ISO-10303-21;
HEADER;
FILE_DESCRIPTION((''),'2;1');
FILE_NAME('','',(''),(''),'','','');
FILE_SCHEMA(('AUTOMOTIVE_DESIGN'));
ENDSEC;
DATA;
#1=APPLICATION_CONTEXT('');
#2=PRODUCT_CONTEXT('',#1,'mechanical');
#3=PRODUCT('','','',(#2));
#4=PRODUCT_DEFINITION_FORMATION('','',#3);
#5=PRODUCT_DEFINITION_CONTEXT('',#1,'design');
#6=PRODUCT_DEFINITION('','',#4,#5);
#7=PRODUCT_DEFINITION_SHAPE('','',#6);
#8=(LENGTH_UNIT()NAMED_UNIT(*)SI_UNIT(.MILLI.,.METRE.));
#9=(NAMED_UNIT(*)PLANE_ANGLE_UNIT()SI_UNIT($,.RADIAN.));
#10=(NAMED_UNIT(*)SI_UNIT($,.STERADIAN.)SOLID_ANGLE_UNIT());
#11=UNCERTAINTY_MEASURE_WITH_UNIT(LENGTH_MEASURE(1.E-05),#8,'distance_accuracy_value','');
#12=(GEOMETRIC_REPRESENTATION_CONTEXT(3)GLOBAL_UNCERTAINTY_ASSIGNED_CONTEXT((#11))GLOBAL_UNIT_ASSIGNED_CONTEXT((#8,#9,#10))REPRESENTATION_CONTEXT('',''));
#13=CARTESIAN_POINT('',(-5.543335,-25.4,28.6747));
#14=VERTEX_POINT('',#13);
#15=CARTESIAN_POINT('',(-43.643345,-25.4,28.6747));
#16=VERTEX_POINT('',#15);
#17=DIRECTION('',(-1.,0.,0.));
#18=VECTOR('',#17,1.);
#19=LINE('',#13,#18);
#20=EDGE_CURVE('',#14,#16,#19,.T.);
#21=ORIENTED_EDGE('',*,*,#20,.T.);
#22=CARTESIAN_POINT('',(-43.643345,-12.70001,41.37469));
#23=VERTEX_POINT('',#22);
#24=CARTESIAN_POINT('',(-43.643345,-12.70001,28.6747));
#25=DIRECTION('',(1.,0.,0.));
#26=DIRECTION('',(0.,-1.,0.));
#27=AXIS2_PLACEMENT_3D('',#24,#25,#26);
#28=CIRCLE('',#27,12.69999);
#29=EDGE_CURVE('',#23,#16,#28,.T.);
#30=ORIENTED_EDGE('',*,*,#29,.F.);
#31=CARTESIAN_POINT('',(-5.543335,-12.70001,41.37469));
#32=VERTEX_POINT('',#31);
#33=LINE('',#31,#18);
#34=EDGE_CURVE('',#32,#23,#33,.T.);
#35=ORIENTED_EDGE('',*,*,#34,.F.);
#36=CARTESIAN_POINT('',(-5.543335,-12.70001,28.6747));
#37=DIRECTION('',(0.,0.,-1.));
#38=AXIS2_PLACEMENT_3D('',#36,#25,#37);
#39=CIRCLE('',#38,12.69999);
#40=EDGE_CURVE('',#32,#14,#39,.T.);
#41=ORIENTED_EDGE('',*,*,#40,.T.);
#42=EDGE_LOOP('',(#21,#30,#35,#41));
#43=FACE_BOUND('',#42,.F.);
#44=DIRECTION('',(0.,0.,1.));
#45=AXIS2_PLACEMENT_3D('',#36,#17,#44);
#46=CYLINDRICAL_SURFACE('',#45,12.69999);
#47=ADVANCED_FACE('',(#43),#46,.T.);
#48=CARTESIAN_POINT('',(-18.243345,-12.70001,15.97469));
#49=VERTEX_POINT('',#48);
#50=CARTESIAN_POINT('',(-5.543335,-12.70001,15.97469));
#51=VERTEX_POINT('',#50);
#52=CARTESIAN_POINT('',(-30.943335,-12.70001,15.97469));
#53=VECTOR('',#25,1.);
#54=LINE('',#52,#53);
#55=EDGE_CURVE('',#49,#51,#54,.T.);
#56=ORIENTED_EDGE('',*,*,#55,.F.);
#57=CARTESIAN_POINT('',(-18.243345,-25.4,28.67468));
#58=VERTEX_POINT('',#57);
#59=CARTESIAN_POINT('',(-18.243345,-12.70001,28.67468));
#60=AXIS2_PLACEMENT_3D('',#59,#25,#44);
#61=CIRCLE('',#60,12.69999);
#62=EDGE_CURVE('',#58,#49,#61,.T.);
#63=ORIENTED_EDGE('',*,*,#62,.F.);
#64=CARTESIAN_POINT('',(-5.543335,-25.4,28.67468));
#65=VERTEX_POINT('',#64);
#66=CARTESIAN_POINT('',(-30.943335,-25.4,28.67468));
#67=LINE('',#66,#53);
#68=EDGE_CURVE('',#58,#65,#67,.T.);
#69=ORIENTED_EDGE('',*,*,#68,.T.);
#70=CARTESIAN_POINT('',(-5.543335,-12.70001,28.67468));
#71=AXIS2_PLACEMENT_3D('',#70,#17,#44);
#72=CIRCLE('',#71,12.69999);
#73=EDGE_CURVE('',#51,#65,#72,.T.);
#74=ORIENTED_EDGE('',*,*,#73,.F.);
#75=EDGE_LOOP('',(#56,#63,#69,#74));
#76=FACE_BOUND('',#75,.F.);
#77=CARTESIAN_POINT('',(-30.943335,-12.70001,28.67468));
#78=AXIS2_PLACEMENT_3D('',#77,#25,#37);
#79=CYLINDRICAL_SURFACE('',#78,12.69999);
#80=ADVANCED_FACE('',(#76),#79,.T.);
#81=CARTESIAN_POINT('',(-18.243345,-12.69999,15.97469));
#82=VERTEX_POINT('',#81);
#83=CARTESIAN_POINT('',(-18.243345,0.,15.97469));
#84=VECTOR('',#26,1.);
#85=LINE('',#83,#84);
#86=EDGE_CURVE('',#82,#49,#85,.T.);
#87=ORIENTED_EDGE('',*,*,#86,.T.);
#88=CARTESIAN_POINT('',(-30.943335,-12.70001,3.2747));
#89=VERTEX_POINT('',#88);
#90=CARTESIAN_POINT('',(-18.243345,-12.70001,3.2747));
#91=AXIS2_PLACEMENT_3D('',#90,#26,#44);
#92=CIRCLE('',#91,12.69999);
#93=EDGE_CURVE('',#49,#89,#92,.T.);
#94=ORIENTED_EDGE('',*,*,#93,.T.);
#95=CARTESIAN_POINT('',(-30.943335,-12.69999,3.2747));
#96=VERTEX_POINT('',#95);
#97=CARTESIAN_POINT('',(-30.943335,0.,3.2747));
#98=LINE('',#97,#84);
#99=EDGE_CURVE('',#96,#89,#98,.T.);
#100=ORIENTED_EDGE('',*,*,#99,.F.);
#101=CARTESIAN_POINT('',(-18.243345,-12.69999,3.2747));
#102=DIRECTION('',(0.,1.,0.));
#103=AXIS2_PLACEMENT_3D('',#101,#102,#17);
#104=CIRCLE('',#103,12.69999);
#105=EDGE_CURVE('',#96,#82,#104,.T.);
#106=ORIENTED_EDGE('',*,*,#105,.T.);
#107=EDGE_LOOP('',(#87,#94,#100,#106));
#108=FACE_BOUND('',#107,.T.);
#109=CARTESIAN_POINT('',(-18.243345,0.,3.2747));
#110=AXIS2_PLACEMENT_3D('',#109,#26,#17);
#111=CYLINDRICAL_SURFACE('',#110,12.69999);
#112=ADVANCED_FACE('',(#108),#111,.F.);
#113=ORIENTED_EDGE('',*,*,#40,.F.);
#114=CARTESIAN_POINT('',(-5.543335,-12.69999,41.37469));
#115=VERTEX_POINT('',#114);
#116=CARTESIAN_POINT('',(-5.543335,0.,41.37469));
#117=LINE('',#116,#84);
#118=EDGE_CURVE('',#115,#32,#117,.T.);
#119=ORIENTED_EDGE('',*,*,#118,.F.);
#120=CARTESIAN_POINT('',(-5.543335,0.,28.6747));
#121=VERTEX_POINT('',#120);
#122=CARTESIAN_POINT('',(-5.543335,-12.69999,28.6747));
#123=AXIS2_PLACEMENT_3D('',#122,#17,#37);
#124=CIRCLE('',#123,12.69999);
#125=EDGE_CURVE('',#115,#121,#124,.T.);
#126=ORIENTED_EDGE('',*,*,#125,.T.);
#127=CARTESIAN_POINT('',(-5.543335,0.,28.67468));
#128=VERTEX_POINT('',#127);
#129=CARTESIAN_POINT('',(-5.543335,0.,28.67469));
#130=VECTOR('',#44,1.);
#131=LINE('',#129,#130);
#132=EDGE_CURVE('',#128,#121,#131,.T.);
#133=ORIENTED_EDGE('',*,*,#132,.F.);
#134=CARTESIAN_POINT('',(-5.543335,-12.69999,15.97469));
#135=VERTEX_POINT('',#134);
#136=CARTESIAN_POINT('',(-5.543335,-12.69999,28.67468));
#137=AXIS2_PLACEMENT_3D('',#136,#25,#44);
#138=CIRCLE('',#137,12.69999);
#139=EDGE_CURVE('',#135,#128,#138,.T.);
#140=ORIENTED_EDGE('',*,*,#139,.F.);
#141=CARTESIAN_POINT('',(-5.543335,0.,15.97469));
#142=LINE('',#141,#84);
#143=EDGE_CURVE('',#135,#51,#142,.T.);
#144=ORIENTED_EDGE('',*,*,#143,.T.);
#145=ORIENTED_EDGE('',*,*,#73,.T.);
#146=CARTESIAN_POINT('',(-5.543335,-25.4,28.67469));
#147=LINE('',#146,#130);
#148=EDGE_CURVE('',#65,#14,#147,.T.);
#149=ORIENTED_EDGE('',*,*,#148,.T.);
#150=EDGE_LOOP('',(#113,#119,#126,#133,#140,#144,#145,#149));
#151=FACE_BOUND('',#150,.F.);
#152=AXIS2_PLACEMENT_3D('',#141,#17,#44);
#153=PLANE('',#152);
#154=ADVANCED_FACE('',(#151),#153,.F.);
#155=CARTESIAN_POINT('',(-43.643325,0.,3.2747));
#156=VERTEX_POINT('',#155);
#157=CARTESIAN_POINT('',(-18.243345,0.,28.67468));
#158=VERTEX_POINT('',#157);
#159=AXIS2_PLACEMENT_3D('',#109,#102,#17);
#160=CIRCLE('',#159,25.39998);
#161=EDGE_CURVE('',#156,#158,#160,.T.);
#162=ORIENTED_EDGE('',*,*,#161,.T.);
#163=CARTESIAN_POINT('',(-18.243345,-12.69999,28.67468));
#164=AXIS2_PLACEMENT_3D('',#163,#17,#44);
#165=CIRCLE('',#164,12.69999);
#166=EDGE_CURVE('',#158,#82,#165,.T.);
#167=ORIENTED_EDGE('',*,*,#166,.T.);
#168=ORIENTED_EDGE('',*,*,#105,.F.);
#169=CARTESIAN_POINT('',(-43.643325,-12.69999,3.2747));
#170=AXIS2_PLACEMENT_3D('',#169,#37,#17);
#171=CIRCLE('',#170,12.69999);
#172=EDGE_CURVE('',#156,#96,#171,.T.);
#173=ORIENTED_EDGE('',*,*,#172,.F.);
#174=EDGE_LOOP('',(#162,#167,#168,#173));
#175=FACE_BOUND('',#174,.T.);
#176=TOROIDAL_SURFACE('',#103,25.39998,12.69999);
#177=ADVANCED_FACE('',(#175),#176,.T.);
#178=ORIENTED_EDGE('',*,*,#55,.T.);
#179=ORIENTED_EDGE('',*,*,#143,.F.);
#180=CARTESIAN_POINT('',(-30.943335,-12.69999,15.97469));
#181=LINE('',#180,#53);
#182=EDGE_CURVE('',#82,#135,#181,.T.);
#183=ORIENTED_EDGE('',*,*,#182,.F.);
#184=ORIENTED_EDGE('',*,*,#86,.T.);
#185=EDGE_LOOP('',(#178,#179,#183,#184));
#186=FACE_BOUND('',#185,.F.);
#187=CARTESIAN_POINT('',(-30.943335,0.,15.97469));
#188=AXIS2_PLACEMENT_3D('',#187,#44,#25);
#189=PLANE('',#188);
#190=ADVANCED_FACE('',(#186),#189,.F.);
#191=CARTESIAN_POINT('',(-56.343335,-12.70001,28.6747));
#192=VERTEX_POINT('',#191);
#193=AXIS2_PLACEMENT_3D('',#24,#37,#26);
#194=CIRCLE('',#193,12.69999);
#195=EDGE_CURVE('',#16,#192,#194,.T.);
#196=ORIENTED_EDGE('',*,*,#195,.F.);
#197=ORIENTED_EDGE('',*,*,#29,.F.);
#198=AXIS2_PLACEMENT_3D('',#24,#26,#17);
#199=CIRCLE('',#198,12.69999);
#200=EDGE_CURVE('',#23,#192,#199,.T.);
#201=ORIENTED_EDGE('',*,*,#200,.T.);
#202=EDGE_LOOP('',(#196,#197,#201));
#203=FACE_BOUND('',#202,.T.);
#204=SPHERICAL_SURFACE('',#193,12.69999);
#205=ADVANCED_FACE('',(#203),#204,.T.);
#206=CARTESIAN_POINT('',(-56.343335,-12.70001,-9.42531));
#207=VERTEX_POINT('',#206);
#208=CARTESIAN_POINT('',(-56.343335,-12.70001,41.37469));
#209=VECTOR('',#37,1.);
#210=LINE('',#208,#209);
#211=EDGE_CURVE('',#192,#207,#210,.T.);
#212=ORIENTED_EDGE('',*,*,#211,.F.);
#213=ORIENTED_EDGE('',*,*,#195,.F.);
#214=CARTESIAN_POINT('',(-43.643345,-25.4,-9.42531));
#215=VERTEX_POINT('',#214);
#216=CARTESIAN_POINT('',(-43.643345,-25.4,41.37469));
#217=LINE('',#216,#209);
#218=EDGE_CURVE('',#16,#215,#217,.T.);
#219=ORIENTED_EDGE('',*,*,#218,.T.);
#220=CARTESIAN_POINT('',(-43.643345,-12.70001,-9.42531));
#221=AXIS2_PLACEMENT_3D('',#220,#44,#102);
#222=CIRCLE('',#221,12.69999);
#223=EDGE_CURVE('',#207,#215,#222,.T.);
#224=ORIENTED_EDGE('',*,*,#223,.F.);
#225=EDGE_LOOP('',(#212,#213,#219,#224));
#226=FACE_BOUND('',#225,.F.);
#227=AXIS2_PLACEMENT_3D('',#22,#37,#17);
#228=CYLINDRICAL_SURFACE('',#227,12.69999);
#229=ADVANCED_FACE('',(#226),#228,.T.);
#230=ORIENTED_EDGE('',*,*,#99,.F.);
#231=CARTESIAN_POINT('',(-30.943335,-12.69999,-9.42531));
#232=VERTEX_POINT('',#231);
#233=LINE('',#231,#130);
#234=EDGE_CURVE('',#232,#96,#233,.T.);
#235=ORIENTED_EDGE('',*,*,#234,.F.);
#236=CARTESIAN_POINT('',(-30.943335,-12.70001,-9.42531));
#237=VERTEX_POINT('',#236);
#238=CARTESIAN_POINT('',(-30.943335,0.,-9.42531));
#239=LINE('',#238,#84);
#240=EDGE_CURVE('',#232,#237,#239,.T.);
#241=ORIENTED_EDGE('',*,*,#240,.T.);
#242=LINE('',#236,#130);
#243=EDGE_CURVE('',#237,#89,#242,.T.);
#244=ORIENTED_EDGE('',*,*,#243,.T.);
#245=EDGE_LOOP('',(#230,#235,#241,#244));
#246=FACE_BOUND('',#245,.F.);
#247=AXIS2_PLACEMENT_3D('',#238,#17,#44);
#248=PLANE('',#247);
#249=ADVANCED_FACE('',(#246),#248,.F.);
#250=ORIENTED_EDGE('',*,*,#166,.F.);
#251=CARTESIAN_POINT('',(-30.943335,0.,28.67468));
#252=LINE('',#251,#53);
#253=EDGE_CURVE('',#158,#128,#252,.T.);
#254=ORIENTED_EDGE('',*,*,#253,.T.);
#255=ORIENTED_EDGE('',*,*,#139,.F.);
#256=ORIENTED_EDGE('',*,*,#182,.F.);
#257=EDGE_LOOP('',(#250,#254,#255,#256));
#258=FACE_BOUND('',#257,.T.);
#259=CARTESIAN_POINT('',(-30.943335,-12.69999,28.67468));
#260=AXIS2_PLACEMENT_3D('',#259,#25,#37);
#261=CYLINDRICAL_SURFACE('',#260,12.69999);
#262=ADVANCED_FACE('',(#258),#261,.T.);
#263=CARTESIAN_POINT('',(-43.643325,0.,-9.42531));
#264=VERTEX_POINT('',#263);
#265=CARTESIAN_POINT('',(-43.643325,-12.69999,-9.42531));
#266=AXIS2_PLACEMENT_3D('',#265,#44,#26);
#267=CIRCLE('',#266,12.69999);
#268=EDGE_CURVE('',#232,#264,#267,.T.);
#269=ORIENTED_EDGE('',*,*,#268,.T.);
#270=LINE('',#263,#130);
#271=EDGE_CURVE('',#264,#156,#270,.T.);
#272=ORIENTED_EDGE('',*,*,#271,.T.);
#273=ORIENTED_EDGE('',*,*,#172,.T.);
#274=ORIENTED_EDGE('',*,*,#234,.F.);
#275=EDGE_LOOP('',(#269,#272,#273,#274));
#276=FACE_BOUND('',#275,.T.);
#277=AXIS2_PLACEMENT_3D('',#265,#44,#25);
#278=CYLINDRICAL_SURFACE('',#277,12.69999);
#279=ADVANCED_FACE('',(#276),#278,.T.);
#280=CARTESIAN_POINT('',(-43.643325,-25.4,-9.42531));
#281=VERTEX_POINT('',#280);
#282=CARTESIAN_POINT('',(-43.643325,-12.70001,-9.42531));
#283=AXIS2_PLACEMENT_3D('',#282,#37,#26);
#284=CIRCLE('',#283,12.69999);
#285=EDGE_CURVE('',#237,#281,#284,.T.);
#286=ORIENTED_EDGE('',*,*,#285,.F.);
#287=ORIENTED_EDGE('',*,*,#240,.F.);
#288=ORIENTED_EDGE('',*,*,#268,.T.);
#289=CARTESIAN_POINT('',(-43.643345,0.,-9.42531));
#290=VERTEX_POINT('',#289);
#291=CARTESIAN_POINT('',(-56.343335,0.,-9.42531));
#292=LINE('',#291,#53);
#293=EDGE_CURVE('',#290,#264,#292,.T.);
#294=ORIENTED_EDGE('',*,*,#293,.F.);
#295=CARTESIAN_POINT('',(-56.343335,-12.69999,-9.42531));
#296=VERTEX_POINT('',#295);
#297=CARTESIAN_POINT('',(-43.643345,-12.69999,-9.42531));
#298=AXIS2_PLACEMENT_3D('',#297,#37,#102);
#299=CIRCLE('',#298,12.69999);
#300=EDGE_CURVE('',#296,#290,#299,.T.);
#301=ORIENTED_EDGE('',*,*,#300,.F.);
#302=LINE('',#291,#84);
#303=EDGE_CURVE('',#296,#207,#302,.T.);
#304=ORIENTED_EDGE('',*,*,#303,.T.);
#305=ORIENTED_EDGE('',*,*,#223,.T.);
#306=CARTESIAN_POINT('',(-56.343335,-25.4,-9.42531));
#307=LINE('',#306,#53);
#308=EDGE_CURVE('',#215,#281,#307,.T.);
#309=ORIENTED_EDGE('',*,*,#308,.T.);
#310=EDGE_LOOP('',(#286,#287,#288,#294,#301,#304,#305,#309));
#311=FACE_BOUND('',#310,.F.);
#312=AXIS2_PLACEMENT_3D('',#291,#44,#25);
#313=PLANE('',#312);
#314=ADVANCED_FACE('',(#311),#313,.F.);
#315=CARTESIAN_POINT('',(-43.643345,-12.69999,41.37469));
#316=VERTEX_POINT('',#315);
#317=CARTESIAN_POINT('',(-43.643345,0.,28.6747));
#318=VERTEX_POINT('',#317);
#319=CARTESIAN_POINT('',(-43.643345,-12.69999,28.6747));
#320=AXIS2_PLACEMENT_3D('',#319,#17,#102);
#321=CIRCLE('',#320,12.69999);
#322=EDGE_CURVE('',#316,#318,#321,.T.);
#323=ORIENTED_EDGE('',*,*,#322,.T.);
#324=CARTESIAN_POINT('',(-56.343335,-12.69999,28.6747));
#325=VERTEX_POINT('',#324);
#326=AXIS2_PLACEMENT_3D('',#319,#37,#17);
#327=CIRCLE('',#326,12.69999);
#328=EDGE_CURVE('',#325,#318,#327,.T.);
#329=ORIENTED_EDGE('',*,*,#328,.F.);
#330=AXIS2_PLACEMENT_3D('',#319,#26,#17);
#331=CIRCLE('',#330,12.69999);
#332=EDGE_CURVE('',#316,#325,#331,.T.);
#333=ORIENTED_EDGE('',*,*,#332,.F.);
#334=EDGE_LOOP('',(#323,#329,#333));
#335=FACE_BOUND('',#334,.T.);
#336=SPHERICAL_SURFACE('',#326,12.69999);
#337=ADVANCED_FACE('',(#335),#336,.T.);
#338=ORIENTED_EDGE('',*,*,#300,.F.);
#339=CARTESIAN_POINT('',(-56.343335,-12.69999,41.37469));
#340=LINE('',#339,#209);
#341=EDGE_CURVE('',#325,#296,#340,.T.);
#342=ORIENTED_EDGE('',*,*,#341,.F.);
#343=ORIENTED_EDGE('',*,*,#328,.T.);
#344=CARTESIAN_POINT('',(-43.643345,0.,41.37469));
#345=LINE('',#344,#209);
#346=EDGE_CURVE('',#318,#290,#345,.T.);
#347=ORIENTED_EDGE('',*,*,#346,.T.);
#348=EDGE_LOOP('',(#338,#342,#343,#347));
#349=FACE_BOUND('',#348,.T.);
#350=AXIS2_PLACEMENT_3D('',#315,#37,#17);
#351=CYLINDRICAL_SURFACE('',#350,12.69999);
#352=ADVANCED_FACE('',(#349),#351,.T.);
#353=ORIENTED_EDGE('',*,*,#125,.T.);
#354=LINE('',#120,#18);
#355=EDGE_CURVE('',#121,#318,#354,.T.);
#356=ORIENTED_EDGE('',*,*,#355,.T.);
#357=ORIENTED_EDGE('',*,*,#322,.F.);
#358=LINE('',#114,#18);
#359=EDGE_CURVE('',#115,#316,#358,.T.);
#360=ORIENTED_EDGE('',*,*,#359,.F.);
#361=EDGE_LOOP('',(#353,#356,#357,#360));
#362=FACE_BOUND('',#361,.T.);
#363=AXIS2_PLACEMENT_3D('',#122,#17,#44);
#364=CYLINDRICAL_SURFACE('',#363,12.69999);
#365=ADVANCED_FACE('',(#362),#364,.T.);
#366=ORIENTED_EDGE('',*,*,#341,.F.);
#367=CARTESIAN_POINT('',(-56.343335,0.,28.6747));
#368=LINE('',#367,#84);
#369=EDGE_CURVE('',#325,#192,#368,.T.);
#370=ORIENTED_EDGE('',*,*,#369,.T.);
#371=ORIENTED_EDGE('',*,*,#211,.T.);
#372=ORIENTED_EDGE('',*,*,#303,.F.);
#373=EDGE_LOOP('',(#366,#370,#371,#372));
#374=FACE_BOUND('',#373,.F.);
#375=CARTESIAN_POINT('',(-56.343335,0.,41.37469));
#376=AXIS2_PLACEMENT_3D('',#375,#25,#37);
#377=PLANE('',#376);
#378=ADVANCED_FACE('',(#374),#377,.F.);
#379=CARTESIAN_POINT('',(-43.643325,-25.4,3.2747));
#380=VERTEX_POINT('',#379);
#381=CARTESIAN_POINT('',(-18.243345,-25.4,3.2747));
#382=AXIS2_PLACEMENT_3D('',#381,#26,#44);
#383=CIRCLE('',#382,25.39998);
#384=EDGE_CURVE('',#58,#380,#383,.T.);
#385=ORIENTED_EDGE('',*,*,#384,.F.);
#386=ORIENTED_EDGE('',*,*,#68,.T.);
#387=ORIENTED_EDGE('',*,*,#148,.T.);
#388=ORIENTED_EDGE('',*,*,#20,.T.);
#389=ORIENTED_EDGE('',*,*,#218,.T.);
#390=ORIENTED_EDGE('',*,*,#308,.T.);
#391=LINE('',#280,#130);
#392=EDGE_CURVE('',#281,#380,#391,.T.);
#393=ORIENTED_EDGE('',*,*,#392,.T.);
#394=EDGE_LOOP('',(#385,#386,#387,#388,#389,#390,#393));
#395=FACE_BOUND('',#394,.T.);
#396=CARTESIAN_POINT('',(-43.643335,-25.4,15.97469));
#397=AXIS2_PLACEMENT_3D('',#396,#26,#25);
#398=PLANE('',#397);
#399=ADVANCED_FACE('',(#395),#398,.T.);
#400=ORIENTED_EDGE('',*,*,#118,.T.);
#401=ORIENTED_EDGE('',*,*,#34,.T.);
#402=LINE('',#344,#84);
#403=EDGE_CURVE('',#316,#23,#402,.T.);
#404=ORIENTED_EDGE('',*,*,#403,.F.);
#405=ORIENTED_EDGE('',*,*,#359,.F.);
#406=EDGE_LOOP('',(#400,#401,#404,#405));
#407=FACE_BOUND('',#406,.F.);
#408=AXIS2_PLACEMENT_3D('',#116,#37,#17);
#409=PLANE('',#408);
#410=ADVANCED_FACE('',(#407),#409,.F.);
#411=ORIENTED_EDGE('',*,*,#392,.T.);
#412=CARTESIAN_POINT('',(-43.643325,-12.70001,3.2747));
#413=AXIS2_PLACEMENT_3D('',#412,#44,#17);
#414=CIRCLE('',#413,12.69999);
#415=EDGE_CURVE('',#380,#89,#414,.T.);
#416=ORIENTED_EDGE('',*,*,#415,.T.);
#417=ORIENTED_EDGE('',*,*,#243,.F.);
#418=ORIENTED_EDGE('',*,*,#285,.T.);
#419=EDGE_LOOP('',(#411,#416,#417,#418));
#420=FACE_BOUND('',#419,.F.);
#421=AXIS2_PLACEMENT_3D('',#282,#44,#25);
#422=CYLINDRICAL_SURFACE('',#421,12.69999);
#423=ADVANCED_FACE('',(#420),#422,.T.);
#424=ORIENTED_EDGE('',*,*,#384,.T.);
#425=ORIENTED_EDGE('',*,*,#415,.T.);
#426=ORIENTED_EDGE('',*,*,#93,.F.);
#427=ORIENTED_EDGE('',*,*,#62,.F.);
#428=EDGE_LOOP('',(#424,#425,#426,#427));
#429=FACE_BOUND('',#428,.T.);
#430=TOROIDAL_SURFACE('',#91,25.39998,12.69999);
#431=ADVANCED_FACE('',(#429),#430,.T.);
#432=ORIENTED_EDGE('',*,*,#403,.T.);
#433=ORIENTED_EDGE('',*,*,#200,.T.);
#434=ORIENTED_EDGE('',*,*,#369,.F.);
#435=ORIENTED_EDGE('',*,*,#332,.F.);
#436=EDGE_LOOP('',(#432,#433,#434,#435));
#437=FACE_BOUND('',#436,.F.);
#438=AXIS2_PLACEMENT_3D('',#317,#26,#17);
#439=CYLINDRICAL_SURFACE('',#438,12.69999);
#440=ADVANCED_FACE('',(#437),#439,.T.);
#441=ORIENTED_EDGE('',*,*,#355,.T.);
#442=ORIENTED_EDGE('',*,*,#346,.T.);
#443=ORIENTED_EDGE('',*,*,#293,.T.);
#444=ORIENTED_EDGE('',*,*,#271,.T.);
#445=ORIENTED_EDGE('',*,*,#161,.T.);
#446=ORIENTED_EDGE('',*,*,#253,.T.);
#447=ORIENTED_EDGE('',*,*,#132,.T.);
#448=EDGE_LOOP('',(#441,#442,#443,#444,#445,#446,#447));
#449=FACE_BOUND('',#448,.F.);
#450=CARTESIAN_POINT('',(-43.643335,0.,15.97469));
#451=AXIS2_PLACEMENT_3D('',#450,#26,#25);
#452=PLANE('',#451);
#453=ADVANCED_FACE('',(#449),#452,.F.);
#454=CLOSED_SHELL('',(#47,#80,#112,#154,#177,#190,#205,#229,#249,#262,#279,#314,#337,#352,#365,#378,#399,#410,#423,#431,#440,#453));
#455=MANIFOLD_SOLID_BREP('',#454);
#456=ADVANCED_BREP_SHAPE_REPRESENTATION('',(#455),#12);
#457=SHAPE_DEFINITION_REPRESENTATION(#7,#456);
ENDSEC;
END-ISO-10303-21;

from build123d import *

# Parameters (mm, degrees)
F0_W     = 25.4
F0_H     = 25.4
F1_DEPTH = 25.4
F2_R     = 12.69999


# Not quite as in the source:
# - a fillet or chamfer is up to 0.001 mm smaller than in the source, because OpenCascade refuses the exact size


with BuildPart() as f1:
    # F0 (on Front) → F1 (new body)
    with BuildSketch(Plane.XZ):
        Polygon((-30.9433350532, 41.3746904978), (-56.3433350532, 41.3746904978), (-56.3433350532, -9.4253095022), (-30.9433350532, -9.4253095022), (-30.9433350532, 15.9746904978), align=None)
        with Locations((-18.2433350532, 28.6746904978)):
            Rectangle(F0_W, F0_H)
    extrude(amount=F1_DEPTH)

    # F2 (radius 12.7 in the source; OpenCascade refuses exactly that, so slightly less here)
    f2_edges = [f1.edges().sort_by_distance(p)[0] for p in [
        (-56.343335, 0, 15.97469),
        (-56.343335, -25.4, 15.97469),
        (-30.943335, -25.4, 41.37469),
        (-56.343335, -12.7, 41.37469),
        (-30.943335, 0, 41.37469),
        (-18.243335, -25.4, 15.97469),
        (-30.943335, -25.4, 3.27469),
        (-30.943335, 0, 3.27469),
        (-18.243335, 0, 15.97469),
        (-30.943335, -12.7, 15.97469),
    ]]
    fillet(f2_edges, radius=F2_R)


solid = f1.part
